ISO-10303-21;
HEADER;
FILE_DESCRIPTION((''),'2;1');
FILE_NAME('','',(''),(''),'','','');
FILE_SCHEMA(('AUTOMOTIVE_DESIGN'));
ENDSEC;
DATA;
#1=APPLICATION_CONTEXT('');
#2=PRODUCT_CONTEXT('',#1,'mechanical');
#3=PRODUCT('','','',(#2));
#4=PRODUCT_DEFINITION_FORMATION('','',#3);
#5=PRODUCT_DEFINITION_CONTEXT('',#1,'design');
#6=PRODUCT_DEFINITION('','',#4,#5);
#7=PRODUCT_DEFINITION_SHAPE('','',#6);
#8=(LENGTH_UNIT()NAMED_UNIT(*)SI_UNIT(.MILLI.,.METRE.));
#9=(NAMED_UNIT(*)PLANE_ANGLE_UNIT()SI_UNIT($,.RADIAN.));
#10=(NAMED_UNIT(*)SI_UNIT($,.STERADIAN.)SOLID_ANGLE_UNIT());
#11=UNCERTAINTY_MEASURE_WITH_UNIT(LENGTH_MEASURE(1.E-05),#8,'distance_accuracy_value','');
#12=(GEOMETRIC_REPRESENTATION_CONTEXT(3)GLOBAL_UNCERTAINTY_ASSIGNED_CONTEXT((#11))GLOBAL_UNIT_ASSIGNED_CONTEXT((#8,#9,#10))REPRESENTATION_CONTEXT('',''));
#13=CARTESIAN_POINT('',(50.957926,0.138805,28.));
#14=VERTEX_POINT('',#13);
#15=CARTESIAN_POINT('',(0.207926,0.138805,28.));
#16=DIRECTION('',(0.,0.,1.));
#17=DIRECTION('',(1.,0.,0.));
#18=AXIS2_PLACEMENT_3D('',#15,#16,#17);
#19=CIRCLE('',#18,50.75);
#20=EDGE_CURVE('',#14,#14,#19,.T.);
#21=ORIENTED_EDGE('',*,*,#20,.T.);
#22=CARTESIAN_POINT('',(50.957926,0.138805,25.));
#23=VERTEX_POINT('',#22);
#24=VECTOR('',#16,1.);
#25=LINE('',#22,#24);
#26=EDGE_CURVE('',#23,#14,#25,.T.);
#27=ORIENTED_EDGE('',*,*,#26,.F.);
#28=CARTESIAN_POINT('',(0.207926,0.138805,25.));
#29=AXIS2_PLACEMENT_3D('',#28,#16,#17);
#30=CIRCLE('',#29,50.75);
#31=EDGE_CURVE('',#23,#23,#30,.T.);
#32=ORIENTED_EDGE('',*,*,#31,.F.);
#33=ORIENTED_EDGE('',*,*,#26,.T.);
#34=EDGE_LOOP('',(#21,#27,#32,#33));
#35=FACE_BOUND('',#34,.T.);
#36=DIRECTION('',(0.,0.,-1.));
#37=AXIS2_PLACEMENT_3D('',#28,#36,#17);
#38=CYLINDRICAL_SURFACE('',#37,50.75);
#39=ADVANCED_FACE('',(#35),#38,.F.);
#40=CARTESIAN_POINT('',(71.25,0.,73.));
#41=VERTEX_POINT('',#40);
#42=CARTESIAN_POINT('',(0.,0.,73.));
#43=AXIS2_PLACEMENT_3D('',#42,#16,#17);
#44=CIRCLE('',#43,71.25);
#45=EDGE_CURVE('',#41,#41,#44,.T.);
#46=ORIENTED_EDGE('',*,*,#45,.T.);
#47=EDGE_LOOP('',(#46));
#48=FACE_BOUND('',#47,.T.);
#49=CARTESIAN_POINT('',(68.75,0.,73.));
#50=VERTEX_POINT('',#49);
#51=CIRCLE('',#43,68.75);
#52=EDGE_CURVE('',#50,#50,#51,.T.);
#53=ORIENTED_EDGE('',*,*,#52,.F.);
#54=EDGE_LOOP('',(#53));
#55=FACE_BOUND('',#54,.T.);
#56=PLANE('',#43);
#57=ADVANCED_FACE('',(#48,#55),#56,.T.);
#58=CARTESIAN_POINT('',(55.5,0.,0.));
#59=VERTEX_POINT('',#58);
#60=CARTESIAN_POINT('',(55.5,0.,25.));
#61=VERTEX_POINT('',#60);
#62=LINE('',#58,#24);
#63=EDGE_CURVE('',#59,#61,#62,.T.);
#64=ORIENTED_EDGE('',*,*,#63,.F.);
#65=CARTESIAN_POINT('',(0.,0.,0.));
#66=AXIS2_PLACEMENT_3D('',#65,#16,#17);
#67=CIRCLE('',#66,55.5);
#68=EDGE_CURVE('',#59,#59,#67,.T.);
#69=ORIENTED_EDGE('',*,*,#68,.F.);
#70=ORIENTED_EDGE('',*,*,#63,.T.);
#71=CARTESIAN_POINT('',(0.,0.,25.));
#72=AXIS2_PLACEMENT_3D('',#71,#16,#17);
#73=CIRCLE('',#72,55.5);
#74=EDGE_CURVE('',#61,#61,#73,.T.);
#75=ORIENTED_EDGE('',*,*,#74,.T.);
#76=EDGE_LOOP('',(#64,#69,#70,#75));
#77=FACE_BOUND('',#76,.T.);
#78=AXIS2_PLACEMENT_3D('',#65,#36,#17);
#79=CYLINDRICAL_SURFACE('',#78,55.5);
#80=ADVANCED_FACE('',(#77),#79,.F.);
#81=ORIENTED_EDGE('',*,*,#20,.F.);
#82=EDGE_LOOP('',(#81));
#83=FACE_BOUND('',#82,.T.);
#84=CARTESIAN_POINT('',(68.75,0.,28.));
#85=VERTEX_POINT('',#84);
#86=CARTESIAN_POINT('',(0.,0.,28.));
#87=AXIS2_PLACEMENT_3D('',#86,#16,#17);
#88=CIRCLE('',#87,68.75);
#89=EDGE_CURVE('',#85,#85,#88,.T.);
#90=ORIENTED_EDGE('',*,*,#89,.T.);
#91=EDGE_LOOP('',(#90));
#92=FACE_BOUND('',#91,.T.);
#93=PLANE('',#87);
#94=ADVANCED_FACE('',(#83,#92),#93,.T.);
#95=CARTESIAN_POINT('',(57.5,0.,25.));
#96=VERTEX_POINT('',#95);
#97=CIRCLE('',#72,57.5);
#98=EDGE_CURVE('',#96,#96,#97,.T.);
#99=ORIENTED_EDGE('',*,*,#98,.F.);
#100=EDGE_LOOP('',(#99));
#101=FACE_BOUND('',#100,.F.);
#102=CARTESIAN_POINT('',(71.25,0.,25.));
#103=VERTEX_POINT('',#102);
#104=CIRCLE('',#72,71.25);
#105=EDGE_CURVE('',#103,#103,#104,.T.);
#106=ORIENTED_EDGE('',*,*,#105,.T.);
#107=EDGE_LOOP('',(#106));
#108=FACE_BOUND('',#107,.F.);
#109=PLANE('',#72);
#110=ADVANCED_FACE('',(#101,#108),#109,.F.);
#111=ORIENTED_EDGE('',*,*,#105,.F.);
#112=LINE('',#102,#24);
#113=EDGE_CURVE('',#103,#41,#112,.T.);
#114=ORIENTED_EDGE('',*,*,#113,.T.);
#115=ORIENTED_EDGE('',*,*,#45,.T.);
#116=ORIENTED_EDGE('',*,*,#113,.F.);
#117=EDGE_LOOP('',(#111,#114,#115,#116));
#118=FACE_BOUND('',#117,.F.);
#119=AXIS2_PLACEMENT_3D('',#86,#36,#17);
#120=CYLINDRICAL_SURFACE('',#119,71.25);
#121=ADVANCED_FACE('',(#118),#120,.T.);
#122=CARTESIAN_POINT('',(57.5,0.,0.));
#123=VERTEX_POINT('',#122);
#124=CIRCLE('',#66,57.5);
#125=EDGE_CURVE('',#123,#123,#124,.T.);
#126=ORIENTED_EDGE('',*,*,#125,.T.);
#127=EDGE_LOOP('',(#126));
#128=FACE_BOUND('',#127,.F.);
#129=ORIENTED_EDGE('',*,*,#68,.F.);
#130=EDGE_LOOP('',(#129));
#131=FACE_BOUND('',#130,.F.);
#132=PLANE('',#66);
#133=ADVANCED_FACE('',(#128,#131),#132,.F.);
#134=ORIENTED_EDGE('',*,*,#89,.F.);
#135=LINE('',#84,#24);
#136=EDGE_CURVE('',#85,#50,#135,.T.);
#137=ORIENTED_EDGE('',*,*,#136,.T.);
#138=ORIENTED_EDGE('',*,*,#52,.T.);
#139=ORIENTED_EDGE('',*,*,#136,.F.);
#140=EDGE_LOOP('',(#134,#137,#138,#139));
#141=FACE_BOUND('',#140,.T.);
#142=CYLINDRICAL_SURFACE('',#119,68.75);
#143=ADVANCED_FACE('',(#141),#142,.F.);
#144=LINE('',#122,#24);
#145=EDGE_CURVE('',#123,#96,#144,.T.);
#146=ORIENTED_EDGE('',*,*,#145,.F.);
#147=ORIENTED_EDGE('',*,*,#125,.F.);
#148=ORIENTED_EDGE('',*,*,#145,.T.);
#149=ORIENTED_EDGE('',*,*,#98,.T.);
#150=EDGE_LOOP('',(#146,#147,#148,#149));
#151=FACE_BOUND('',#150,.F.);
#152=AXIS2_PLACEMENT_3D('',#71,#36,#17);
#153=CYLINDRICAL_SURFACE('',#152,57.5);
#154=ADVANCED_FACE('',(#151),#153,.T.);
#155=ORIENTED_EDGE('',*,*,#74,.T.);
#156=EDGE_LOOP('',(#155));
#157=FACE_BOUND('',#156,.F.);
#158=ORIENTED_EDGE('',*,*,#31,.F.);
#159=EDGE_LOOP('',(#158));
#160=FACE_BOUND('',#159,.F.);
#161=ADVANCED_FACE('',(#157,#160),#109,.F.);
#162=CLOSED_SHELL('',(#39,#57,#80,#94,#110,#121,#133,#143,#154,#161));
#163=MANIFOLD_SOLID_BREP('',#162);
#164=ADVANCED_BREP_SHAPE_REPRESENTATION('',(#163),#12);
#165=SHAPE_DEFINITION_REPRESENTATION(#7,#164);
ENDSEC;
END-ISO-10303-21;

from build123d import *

# Parameters (mm, degrees)
F0_R     = 57.5
F0_R_2   = 55.5
F1_DEPTH = 25
F2_R     = 57.5
F2_R_2   = 55.5
F2_R_3   = 50.75
F3_DEPTH = 3
F2_R_4   = 71.25
F4_DEPTH = 3
F5_R     = 71.25
F5_R_2   = 68.75
F6_DEPTH = 45


with BuildPart() as f1:
    # F0 (on Top) → F1 (new body)
    with BuildSketch(Plane.XY):
        Circle(F0_R)
        Circle(F0_R_2, mode=Mode.SUBTRACT)
    extrude(amount=F1_DEPTH)

    # F2 (on face) → F3 (join)
    with BuildSketch(Plane.XY.offset(25)):
        Circle(F2_R)
        Circle(F2_R_2, mode=Mode.SUBTRACT)
        Circle(F2_R_2)
        with Locations((0.2079256644, 0.1388053244)):
            Circle(F2_R_3, mode=Mode.SUBTRACT)
    extrude(amount=F3_DEPTH)

    # F2 (on face) → F4 (join)
    with BuildSketch(Plane.XY.offset(25)):
        Circle(F2_R_4)
        Circle(F2_R, mode=Mode.SUBTRACT)
    extrude(amount=F4_DEPTH)

    # F5 (on face) → F6 (join)
    with BuildSketch(Plane.XY.offset(28)):
        Circle(F5_R)
        Circle(F5_R_2, mode=Mode.SUBTRACT)
    extrude(amount=F6_DEPTH)


solid = f1.part
